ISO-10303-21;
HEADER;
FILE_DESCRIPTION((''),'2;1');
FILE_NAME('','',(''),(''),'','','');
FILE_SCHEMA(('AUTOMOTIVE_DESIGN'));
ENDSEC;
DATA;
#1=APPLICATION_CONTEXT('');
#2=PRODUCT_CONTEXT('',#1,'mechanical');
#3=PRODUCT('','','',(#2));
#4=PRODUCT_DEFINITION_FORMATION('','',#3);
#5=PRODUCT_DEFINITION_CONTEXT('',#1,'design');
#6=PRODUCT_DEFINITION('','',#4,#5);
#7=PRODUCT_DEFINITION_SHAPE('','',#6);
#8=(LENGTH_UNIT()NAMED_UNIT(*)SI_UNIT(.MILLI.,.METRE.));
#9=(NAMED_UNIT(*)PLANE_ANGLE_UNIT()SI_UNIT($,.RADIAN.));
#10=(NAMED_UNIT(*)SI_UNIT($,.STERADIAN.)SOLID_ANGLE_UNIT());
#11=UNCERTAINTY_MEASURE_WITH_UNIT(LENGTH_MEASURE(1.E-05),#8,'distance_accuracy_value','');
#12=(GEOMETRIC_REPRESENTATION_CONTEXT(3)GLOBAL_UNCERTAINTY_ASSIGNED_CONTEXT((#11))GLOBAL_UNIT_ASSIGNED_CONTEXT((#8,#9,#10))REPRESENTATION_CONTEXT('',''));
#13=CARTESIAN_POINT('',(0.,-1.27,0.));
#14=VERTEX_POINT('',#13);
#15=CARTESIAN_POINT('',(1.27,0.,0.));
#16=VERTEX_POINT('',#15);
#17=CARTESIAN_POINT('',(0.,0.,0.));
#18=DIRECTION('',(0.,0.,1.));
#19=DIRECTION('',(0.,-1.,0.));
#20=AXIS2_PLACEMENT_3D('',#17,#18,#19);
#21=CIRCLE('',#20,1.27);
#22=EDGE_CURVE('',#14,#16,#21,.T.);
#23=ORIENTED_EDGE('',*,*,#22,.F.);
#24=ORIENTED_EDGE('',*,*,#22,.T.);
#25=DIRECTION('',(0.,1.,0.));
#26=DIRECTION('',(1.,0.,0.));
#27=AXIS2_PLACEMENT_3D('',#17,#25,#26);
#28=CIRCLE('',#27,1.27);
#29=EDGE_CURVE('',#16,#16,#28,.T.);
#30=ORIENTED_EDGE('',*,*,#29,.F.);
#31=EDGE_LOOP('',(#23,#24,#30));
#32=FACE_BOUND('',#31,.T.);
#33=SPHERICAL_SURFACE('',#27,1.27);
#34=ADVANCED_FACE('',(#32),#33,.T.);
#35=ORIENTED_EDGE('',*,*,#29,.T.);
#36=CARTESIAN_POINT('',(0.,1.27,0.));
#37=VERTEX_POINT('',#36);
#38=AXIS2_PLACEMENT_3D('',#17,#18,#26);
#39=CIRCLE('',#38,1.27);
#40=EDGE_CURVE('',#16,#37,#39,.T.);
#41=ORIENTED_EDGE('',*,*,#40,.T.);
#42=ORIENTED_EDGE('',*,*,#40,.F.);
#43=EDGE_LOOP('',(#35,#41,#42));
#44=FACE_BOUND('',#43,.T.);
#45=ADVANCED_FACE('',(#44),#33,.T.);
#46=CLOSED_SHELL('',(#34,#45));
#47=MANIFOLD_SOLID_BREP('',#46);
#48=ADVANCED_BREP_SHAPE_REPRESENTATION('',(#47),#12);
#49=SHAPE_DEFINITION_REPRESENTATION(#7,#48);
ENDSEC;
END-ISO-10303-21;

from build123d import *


with BuildPart() as f2:
    # F0 (on Top) → F2 (revolve)
    with BuildSketch(Plane.XY):
        with BuildLine():
            ThreePointArc((0, -1.27), (0.8980256121, -0.8980256121), (1.27, 0))
            ThreePointArc((1.27, 0), (0.8980256121, 0.8980256121), (0, 1.27))
            Line((0, 1.27), (0, 0))
            Line((0, 0), (0, -1.27))
        make_face()
    revolve(axis=Axis((0, 0.030922005, 0), (0, 1, 0)))


solid = f2.part
